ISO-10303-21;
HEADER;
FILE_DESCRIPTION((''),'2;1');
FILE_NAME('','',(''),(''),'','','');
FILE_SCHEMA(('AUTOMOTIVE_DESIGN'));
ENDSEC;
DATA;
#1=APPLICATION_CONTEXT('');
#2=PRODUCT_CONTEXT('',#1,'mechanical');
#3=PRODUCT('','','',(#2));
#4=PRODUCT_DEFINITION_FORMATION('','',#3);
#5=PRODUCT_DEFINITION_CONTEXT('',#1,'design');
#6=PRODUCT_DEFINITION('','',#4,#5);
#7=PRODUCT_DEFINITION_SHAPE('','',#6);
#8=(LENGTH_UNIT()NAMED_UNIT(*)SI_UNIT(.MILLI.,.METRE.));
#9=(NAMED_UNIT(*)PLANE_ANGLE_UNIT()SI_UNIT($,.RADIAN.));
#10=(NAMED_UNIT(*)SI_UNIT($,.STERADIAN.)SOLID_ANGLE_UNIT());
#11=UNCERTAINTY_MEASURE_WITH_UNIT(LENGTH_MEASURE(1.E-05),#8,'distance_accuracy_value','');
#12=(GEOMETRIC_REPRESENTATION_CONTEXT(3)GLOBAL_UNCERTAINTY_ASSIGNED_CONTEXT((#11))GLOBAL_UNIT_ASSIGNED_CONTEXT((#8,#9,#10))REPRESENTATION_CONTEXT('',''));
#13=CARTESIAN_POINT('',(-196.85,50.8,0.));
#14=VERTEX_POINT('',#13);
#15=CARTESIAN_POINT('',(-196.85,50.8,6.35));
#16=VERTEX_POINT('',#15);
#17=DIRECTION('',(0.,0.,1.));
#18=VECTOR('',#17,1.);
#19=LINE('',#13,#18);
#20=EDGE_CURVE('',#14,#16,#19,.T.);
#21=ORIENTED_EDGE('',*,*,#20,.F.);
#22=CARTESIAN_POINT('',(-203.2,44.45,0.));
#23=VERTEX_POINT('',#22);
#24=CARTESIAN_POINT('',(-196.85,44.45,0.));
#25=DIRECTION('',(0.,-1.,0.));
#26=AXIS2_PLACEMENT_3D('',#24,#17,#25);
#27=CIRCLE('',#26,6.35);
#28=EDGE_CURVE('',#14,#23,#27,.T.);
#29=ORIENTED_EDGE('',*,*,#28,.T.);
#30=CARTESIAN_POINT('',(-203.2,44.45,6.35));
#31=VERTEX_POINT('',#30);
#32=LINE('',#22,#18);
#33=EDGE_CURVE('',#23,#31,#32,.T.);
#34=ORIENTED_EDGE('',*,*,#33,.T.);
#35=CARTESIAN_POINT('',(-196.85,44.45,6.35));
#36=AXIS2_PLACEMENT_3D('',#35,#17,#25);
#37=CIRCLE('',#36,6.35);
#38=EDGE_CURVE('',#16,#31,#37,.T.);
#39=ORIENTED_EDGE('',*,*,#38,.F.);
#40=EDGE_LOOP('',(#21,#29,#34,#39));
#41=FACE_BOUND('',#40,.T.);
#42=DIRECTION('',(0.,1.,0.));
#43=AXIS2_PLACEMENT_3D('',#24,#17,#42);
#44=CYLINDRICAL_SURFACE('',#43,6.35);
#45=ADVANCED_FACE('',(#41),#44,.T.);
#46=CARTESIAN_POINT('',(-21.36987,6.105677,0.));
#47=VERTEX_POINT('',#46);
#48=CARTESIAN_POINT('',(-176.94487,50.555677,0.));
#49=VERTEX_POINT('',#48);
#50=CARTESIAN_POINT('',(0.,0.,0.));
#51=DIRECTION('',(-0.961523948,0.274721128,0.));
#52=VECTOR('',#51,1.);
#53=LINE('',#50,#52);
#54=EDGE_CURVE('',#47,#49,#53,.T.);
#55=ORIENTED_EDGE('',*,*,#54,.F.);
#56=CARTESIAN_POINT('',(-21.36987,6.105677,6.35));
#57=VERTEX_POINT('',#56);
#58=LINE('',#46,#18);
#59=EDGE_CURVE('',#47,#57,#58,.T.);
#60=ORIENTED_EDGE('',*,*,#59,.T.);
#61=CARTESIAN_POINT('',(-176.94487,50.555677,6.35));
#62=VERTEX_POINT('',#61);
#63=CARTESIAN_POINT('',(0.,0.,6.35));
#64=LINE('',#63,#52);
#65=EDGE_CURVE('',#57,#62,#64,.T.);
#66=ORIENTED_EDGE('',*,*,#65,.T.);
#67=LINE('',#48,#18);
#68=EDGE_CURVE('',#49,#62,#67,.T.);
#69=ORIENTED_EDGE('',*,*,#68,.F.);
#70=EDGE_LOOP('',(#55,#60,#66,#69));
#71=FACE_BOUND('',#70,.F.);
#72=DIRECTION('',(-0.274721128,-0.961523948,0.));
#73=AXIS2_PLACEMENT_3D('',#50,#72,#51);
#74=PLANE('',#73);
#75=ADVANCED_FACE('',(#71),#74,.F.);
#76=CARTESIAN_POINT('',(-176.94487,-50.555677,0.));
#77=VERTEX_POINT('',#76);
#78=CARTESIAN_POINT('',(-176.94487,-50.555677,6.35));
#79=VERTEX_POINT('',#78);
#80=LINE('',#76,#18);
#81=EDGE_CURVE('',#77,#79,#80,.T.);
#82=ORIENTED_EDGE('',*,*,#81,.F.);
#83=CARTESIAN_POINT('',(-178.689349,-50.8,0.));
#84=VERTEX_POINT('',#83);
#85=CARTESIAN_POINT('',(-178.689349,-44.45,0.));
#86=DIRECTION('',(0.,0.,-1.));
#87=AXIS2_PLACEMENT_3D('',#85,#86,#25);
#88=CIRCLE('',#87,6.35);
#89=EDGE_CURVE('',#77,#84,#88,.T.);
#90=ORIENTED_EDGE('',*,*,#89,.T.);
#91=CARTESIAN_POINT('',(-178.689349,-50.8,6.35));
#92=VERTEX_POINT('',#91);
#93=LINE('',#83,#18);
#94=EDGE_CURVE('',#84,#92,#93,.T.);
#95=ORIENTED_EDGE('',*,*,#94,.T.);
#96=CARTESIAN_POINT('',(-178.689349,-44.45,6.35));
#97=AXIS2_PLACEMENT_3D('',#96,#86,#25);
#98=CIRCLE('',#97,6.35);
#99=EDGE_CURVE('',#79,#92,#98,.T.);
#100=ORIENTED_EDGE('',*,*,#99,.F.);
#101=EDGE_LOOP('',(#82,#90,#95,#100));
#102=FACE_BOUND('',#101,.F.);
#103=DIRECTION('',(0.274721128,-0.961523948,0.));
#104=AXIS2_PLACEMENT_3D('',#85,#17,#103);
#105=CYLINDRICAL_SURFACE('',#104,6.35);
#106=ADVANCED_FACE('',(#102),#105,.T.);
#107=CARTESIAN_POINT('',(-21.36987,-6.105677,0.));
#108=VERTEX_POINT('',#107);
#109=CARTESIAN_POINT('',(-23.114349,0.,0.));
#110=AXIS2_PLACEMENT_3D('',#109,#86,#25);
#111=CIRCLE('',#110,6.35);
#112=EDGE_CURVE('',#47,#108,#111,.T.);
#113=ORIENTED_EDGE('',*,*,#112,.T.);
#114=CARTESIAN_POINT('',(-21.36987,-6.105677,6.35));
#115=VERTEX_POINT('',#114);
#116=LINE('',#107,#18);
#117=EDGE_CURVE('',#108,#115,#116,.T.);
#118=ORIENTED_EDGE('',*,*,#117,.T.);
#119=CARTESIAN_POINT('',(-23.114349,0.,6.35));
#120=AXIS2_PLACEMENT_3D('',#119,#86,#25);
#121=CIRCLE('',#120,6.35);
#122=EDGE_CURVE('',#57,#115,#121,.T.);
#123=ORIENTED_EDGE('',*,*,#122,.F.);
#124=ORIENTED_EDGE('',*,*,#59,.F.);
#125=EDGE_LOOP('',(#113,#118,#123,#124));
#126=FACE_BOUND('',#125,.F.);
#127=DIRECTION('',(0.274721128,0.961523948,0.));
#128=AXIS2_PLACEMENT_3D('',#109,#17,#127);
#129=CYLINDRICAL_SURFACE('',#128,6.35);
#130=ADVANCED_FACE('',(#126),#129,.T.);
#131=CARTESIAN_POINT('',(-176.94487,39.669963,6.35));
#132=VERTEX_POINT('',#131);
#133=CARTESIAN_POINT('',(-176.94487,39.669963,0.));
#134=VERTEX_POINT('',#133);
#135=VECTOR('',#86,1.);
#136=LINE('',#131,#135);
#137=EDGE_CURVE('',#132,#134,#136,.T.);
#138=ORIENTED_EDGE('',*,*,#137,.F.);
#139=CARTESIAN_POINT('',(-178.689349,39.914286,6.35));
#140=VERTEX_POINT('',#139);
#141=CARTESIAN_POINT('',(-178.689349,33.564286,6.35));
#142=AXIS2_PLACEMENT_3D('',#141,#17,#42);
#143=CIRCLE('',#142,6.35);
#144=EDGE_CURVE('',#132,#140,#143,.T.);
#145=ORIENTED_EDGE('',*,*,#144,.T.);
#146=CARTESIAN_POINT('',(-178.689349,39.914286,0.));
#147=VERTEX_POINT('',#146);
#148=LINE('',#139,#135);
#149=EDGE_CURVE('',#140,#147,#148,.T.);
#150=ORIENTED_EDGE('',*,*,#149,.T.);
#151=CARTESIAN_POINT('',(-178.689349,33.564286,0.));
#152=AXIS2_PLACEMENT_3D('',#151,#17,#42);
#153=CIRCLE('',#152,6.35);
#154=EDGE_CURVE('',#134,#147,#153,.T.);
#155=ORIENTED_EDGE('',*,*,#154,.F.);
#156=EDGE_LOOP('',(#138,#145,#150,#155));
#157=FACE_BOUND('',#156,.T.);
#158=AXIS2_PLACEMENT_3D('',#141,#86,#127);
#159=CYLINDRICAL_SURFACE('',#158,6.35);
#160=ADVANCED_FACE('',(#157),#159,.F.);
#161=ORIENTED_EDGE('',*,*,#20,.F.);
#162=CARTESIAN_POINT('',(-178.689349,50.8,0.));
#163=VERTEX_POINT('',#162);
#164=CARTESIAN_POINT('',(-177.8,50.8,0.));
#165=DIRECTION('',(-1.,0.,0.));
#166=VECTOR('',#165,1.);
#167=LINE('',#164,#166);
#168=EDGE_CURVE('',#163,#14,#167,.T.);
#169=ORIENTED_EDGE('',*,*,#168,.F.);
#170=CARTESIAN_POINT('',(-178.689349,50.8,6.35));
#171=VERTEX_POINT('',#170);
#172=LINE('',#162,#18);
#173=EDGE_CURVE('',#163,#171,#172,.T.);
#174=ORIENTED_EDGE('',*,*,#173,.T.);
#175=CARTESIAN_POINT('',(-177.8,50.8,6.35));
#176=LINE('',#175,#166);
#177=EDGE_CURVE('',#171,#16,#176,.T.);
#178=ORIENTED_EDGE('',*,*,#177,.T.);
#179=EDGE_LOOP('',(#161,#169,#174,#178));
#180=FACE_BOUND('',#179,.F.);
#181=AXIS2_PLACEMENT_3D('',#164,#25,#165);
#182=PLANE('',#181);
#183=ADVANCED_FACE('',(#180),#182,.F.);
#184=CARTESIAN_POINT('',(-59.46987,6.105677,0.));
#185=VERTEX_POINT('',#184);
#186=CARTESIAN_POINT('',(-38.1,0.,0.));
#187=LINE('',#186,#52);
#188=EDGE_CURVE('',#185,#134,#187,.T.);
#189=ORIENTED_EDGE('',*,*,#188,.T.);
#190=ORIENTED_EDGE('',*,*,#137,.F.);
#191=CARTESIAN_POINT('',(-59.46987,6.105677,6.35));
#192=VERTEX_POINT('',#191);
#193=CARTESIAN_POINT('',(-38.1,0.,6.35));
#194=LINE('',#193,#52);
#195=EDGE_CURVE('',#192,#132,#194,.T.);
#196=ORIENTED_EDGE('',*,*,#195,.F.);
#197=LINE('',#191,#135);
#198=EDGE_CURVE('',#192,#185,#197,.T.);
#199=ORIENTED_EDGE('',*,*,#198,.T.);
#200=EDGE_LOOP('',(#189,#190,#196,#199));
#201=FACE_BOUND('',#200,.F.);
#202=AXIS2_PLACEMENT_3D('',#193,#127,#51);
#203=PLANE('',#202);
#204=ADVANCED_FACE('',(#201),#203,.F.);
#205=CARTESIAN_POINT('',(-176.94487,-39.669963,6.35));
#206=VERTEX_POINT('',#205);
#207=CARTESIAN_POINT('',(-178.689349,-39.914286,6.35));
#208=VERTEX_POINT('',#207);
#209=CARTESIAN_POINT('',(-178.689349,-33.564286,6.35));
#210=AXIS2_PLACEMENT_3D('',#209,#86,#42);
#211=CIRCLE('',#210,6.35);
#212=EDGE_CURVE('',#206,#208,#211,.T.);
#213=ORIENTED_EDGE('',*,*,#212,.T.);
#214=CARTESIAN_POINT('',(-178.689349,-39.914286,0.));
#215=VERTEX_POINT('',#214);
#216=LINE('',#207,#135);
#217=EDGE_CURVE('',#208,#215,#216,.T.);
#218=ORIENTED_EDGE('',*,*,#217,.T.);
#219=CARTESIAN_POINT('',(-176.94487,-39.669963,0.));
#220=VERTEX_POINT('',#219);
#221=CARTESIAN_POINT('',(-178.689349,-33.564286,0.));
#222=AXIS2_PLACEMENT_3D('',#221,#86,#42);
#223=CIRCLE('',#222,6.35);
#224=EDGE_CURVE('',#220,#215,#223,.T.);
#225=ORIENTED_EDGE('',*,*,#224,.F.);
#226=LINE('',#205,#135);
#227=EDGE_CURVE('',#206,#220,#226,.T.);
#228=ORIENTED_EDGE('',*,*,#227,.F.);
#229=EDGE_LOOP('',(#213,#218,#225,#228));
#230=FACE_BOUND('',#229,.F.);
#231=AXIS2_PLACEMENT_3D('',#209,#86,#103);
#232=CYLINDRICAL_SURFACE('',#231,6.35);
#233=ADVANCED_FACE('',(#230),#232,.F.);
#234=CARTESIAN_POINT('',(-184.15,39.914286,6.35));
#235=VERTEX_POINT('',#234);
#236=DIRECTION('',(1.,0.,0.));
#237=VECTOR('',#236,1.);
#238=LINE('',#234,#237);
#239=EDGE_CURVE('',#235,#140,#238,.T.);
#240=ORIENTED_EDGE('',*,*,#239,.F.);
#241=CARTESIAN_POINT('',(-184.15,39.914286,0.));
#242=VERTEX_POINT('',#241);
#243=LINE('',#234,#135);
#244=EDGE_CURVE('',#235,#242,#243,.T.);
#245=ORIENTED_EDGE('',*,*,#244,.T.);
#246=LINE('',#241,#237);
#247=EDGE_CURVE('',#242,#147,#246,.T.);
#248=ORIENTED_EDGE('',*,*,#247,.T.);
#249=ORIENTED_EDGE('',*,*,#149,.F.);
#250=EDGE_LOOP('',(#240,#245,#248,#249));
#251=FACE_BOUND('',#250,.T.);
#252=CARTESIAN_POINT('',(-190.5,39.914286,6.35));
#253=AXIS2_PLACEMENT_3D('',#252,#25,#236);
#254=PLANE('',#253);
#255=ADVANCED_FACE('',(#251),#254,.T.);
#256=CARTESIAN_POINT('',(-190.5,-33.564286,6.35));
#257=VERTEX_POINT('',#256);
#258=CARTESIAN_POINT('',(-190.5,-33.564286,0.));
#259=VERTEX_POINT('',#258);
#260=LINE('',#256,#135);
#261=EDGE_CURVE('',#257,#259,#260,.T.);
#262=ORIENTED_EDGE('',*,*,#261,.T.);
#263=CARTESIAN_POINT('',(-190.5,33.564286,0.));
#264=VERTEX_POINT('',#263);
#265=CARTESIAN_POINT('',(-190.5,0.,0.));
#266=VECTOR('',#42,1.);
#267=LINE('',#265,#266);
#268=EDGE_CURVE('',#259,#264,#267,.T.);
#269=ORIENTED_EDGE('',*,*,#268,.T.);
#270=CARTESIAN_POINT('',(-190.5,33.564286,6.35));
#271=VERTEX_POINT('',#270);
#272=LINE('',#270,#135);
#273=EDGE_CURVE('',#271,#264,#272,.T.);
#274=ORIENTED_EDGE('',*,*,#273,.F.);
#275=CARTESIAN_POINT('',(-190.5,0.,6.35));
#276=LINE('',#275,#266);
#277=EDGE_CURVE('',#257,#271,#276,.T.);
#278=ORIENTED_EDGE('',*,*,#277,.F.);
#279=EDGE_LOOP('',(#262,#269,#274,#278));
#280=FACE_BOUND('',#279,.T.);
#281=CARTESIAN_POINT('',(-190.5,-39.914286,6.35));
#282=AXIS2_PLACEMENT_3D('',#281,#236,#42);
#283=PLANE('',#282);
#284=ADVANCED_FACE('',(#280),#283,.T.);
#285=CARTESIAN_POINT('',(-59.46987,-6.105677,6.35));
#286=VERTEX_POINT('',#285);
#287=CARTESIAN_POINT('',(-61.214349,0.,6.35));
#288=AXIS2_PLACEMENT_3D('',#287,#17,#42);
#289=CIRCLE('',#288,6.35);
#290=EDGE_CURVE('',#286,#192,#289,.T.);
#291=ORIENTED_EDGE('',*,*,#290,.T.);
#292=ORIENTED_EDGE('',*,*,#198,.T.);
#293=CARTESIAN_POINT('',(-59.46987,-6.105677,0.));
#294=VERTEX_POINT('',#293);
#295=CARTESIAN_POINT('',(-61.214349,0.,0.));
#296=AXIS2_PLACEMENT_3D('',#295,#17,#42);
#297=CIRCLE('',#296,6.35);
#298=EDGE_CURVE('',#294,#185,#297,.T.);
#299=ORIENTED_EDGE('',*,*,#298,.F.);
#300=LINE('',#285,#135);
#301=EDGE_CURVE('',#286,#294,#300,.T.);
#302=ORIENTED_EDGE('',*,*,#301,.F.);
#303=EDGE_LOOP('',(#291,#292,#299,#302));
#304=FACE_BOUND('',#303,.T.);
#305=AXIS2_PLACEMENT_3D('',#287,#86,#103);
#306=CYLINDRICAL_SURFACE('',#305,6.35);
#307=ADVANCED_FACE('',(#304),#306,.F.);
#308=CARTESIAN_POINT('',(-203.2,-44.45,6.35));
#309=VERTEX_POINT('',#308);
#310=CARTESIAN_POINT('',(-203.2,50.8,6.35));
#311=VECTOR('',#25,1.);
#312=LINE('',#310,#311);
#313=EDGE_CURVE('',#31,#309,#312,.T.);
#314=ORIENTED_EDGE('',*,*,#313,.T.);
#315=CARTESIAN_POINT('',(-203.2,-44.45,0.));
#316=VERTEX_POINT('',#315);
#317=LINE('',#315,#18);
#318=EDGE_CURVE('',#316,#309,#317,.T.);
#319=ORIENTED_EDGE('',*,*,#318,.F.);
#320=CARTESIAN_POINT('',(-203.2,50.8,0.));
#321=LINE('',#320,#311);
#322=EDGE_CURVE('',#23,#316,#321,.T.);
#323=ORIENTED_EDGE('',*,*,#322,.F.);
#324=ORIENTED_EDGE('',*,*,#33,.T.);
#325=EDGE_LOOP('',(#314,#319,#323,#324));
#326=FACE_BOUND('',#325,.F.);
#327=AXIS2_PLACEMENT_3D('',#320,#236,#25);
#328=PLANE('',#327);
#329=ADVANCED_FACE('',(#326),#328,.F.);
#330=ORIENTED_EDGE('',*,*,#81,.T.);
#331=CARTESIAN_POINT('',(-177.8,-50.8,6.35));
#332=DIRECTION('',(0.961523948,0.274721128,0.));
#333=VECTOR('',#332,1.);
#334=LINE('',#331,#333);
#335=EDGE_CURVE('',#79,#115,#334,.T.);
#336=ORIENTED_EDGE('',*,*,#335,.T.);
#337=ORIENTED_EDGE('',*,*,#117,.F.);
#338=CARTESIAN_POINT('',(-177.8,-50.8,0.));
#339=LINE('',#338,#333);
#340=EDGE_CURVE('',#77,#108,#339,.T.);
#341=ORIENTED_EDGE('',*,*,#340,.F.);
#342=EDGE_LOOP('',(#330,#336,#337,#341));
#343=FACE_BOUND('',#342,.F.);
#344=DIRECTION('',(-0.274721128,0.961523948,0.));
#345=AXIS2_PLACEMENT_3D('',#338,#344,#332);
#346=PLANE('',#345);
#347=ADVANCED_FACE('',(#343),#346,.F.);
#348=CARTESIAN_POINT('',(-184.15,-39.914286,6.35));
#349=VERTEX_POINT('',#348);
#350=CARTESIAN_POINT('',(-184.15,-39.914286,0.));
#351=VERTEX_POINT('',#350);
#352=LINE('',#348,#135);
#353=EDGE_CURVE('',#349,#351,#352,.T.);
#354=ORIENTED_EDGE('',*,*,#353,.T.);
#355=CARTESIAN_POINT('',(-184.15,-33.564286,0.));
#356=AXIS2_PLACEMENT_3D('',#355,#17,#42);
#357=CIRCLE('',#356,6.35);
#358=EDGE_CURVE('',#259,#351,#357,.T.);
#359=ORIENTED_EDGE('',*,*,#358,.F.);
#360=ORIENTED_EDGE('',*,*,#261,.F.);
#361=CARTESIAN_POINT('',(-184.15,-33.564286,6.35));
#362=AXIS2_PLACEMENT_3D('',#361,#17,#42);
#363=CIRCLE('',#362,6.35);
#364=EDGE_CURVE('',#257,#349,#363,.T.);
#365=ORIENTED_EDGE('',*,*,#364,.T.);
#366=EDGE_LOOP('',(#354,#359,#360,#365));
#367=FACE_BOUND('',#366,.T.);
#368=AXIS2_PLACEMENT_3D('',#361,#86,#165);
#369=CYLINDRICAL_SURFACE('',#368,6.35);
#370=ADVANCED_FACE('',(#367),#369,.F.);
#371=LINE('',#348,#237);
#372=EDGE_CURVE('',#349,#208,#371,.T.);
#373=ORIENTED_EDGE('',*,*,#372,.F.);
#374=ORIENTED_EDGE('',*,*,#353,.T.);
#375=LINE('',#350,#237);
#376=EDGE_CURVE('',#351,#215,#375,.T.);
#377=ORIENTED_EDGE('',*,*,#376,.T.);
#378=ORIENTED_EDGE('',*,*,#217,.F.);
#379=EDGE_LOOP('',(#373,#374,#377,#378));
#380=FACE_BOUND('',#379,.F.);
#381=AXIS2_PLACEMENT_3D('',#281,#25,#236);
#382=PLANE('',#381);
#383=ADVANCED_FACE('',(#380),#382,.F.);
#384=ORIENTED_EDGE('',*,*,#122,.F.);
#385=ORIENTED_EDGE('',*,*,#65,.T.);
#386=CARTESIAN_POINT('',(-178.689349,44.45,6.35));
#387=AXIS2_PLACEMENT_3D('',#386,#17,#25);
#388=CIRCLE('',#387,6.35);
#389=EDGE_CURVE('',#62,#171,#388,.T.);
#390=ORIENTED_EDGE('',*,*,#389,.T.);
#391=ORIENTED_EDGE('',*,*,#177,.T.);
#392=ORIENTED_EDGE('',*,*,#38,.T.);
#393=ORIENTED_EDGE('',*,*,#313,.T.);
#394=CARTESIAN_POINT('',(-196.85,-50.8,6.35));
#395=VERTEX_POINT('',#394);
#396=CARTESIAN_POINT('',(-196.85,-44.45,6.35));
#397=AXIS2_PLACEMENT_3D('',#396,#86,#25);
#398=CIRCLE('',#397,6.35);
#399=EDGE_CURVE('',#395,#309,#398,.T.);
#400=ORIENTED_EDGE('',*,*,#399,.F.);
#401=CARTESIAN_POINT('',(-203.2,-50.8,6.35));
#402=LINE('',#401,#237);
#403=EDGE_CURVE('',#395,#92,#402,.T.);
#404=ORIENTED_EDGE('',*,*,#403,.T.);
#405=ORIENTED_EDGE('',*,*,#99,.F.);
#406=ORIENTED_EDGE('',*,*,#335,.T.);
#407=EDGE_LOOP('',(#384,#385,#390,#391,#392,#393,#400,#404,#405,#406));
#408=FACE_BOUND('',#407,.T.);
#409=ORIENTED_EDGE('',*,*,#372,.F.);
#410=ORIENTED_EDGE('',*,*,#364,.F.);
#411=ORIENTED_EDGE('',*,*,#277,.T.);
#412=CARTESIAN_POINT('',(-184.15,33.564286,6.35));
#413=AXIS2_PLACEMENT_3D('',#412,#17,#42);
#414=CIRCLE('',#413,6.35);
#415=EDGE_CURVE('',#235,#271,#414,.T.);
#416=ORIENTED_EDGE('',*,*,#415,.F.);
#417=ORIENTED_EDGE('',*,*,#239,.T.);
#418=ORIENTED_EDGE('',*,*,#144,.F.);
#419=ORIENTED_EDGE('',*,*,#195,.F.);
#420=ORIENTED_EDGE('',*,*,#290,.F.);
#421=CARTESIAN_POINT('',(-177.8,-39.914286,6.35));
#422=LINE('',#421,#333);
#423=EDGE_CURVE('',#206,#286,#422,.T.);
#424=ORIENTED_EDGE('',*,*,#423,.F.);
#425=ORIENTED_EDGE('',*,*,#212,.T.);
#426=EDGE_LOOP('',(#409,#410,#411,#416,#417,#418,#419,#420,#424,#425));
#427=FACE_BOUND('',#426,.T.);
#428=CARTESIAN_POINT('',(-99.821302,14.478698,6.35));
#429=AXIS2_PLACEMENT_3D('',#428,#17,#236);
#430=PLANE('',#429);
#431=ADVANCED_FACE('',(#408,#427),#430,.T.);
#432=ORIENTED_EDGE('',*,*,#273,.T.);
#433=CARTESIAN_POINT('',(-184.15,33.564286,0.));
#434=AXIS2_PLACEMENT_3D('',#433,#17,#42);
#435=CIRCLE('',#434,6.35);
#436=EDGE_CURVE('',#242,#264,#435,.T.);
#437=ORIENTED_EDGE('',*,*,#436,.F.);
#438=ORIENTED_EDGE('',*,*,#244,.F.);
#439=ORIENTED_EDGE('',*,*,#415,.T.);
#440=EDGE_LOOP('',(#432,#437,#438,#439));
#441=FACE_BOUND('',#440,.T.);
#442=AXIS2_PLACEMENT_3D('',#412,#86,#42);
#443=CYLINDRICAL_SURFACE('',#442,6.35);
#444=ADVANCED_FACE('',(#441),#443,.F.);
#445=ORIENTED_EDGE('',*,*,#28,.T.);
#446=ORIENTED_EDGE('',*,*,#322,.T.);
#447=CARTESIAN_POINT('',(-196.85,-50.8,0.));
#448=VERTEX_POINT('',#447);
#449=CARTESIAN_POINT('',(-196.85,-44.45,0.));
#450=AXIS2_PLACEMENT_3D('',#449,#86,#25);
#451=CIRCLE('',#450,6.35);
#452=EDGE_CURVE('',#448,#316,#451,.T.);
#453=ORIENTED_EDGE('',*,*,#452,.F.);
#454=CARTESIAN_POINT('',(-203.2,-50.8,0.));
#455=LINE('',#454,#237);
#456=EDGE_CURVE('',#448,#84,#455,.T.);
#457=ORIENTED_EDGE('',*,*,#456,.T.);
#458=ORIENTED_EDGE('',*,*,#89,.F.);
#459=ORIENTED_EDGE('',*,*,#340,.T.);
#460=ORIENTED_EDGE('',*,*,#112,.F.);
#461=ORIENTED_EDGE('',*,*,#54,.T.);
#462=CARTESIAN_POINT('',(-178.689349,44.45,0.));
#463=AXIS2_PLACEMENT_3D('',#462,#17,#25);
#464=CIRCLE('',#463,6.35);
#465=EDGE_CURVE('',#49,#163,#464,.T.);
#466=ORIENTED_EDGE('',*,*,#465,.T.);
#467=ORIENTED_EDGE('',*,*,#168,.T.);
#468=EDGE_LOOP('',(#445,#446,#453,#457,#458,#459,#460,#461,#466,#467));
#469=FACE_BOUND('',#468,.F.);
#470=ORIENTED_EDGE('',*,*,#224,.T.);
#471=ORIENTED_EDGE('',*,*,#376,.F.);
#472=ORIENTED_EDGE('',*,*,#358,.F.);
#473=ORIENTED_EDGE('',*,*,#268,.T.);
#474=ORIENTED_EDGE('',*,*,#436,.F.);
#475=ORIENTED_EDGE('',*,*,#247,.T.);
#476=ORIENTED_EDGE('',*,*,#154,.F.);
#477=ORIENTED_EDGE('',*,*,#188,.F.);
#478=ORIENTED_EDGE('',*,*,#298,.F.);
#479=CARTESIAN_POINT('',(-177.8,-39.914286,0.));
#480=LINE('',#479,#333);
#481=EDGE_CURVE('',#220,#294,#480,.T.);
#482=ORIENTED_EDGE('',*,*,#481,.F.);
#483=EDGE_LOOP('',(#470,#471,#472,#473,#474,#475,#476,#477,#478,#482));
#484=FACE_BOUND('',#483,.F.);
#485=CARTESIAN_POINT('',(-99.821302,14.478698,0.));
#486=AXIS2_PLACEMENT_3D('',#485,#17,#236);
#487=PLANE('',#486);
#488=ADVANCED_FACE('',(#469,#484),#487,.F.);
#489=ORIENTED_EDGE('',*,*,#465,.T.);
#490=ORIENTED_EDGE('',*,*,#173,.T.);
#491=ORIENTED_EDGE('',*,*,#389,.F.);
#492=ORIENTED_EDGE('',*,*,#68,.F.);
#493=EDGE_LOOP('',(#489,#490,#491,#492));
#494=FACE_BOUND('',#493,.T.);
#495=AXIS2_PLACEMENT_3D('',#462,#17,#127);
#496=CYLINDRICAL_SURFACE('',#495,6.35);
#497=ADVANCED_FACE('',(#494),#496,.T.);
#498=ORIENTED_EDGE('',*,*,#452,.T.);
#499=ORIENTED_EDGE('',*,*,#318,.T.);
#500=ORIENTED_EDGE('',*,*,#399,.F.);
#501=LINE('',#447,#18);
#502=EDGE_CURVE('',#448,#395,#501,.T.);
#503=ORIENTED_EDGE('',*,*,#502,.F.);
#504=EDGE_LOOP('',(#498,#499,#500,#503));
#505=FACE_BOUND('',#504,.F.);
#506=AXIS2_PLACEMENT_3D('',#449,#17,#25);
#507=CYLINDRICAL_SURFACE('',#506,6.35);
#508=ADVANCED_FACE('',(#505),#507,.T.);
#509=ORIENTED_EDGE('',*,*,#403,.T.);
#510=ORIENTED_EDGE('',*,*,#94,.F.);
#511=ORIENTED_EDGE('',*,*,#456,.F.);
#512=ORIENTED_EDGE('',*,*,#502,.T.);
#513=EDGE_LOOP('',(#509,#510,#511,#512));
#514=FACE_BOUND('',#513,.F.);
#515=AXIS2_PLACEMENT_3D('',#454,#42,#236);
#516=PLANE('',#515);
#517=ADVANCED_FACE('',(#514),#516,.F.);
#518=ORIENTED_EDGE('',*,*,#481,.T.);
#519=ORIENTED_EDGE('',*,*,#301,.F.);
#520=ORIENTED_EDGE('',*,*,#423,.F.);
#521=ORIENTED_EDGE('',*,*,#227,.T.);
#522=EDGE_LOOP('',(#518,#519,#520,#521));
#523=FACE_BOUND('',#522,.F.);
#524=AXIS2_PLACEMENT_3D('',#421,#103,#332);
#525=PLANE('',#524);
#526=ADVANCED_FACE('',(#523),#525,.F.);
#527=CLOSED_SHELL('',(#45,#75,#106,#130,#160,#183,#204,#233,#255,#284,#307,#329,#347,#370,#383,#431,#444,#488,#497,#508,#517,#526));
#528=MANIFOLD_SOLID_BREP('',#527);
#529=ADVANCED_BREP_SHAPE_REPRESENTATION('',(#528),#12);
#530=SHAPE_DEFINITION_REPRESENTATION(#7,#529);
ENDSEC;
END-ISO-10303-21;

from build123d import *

# Parameters (mm, degrees)
F1_DEPTH = 6.35
F2_W     = 12.7
F2_H     = 79.8285714286
F3_DEPTH = 6.35
F4_R     = 6.35
F5_R     = 6.35


with BuildPart() as f1:
    # F0 (on Top) → F1 (new body)
    with BuildSketch(Plane.XY):
        Polygon((-177.8, 0), (0, 0), (-177.8, 50.8), align=None)
        Polygon((-177.8, -50.8), (0, 0), (-177.8, 0), align=None)
        Polygon((-177.8, 0), (-177.8, 50.8), (-203.2, 50.8), (-203.2, -50.8), (-177.8, -50.8), align=None)
    extrude(amount=F1_DEPTH)

    # F2 (on face) → F3 (cut, through all)
    with BuildSketch(Plane.XY.offset(6.35)):
        Polygon((-177.8, 39.9142857143), (-177.8, -39.9142857143), (-38.1, 0), align=None)
        with Locations((-184.15, 0)):
            Rectangle(F2_W, F2_H)
    extrude(amount=-F3_DEPTH, mode=Mode.SUBTRACT)

    # F4
    f4_edges = [f1.edges().sort_by_distance(p)[0] for p in [
        (-177.8, -50.8, 3.175),
        (-177.8, 50.8, 3.175),
        (-203.2, -50.8, 3.175),
        (-203.2, 50.8, 3.175),
    ]]
    fillet(f4_edges, radius=F4_R)

    # F5
    f5_edges = [f1.edges().sort_by_distance(p)[0] for p in [
        (-177.8, -39.914286, 3.175),
        (-190.5, -39.914286, 3.175),
        (-190.5, 39.914286, 3.175),
        (-177.8, 39.914286, 3.175),
        (0, 0, 3.175),
        (-38.1, 0, 3.175),
    ]]
    fillet(f5_edges, radius=F5_R)


solid = f1.part
